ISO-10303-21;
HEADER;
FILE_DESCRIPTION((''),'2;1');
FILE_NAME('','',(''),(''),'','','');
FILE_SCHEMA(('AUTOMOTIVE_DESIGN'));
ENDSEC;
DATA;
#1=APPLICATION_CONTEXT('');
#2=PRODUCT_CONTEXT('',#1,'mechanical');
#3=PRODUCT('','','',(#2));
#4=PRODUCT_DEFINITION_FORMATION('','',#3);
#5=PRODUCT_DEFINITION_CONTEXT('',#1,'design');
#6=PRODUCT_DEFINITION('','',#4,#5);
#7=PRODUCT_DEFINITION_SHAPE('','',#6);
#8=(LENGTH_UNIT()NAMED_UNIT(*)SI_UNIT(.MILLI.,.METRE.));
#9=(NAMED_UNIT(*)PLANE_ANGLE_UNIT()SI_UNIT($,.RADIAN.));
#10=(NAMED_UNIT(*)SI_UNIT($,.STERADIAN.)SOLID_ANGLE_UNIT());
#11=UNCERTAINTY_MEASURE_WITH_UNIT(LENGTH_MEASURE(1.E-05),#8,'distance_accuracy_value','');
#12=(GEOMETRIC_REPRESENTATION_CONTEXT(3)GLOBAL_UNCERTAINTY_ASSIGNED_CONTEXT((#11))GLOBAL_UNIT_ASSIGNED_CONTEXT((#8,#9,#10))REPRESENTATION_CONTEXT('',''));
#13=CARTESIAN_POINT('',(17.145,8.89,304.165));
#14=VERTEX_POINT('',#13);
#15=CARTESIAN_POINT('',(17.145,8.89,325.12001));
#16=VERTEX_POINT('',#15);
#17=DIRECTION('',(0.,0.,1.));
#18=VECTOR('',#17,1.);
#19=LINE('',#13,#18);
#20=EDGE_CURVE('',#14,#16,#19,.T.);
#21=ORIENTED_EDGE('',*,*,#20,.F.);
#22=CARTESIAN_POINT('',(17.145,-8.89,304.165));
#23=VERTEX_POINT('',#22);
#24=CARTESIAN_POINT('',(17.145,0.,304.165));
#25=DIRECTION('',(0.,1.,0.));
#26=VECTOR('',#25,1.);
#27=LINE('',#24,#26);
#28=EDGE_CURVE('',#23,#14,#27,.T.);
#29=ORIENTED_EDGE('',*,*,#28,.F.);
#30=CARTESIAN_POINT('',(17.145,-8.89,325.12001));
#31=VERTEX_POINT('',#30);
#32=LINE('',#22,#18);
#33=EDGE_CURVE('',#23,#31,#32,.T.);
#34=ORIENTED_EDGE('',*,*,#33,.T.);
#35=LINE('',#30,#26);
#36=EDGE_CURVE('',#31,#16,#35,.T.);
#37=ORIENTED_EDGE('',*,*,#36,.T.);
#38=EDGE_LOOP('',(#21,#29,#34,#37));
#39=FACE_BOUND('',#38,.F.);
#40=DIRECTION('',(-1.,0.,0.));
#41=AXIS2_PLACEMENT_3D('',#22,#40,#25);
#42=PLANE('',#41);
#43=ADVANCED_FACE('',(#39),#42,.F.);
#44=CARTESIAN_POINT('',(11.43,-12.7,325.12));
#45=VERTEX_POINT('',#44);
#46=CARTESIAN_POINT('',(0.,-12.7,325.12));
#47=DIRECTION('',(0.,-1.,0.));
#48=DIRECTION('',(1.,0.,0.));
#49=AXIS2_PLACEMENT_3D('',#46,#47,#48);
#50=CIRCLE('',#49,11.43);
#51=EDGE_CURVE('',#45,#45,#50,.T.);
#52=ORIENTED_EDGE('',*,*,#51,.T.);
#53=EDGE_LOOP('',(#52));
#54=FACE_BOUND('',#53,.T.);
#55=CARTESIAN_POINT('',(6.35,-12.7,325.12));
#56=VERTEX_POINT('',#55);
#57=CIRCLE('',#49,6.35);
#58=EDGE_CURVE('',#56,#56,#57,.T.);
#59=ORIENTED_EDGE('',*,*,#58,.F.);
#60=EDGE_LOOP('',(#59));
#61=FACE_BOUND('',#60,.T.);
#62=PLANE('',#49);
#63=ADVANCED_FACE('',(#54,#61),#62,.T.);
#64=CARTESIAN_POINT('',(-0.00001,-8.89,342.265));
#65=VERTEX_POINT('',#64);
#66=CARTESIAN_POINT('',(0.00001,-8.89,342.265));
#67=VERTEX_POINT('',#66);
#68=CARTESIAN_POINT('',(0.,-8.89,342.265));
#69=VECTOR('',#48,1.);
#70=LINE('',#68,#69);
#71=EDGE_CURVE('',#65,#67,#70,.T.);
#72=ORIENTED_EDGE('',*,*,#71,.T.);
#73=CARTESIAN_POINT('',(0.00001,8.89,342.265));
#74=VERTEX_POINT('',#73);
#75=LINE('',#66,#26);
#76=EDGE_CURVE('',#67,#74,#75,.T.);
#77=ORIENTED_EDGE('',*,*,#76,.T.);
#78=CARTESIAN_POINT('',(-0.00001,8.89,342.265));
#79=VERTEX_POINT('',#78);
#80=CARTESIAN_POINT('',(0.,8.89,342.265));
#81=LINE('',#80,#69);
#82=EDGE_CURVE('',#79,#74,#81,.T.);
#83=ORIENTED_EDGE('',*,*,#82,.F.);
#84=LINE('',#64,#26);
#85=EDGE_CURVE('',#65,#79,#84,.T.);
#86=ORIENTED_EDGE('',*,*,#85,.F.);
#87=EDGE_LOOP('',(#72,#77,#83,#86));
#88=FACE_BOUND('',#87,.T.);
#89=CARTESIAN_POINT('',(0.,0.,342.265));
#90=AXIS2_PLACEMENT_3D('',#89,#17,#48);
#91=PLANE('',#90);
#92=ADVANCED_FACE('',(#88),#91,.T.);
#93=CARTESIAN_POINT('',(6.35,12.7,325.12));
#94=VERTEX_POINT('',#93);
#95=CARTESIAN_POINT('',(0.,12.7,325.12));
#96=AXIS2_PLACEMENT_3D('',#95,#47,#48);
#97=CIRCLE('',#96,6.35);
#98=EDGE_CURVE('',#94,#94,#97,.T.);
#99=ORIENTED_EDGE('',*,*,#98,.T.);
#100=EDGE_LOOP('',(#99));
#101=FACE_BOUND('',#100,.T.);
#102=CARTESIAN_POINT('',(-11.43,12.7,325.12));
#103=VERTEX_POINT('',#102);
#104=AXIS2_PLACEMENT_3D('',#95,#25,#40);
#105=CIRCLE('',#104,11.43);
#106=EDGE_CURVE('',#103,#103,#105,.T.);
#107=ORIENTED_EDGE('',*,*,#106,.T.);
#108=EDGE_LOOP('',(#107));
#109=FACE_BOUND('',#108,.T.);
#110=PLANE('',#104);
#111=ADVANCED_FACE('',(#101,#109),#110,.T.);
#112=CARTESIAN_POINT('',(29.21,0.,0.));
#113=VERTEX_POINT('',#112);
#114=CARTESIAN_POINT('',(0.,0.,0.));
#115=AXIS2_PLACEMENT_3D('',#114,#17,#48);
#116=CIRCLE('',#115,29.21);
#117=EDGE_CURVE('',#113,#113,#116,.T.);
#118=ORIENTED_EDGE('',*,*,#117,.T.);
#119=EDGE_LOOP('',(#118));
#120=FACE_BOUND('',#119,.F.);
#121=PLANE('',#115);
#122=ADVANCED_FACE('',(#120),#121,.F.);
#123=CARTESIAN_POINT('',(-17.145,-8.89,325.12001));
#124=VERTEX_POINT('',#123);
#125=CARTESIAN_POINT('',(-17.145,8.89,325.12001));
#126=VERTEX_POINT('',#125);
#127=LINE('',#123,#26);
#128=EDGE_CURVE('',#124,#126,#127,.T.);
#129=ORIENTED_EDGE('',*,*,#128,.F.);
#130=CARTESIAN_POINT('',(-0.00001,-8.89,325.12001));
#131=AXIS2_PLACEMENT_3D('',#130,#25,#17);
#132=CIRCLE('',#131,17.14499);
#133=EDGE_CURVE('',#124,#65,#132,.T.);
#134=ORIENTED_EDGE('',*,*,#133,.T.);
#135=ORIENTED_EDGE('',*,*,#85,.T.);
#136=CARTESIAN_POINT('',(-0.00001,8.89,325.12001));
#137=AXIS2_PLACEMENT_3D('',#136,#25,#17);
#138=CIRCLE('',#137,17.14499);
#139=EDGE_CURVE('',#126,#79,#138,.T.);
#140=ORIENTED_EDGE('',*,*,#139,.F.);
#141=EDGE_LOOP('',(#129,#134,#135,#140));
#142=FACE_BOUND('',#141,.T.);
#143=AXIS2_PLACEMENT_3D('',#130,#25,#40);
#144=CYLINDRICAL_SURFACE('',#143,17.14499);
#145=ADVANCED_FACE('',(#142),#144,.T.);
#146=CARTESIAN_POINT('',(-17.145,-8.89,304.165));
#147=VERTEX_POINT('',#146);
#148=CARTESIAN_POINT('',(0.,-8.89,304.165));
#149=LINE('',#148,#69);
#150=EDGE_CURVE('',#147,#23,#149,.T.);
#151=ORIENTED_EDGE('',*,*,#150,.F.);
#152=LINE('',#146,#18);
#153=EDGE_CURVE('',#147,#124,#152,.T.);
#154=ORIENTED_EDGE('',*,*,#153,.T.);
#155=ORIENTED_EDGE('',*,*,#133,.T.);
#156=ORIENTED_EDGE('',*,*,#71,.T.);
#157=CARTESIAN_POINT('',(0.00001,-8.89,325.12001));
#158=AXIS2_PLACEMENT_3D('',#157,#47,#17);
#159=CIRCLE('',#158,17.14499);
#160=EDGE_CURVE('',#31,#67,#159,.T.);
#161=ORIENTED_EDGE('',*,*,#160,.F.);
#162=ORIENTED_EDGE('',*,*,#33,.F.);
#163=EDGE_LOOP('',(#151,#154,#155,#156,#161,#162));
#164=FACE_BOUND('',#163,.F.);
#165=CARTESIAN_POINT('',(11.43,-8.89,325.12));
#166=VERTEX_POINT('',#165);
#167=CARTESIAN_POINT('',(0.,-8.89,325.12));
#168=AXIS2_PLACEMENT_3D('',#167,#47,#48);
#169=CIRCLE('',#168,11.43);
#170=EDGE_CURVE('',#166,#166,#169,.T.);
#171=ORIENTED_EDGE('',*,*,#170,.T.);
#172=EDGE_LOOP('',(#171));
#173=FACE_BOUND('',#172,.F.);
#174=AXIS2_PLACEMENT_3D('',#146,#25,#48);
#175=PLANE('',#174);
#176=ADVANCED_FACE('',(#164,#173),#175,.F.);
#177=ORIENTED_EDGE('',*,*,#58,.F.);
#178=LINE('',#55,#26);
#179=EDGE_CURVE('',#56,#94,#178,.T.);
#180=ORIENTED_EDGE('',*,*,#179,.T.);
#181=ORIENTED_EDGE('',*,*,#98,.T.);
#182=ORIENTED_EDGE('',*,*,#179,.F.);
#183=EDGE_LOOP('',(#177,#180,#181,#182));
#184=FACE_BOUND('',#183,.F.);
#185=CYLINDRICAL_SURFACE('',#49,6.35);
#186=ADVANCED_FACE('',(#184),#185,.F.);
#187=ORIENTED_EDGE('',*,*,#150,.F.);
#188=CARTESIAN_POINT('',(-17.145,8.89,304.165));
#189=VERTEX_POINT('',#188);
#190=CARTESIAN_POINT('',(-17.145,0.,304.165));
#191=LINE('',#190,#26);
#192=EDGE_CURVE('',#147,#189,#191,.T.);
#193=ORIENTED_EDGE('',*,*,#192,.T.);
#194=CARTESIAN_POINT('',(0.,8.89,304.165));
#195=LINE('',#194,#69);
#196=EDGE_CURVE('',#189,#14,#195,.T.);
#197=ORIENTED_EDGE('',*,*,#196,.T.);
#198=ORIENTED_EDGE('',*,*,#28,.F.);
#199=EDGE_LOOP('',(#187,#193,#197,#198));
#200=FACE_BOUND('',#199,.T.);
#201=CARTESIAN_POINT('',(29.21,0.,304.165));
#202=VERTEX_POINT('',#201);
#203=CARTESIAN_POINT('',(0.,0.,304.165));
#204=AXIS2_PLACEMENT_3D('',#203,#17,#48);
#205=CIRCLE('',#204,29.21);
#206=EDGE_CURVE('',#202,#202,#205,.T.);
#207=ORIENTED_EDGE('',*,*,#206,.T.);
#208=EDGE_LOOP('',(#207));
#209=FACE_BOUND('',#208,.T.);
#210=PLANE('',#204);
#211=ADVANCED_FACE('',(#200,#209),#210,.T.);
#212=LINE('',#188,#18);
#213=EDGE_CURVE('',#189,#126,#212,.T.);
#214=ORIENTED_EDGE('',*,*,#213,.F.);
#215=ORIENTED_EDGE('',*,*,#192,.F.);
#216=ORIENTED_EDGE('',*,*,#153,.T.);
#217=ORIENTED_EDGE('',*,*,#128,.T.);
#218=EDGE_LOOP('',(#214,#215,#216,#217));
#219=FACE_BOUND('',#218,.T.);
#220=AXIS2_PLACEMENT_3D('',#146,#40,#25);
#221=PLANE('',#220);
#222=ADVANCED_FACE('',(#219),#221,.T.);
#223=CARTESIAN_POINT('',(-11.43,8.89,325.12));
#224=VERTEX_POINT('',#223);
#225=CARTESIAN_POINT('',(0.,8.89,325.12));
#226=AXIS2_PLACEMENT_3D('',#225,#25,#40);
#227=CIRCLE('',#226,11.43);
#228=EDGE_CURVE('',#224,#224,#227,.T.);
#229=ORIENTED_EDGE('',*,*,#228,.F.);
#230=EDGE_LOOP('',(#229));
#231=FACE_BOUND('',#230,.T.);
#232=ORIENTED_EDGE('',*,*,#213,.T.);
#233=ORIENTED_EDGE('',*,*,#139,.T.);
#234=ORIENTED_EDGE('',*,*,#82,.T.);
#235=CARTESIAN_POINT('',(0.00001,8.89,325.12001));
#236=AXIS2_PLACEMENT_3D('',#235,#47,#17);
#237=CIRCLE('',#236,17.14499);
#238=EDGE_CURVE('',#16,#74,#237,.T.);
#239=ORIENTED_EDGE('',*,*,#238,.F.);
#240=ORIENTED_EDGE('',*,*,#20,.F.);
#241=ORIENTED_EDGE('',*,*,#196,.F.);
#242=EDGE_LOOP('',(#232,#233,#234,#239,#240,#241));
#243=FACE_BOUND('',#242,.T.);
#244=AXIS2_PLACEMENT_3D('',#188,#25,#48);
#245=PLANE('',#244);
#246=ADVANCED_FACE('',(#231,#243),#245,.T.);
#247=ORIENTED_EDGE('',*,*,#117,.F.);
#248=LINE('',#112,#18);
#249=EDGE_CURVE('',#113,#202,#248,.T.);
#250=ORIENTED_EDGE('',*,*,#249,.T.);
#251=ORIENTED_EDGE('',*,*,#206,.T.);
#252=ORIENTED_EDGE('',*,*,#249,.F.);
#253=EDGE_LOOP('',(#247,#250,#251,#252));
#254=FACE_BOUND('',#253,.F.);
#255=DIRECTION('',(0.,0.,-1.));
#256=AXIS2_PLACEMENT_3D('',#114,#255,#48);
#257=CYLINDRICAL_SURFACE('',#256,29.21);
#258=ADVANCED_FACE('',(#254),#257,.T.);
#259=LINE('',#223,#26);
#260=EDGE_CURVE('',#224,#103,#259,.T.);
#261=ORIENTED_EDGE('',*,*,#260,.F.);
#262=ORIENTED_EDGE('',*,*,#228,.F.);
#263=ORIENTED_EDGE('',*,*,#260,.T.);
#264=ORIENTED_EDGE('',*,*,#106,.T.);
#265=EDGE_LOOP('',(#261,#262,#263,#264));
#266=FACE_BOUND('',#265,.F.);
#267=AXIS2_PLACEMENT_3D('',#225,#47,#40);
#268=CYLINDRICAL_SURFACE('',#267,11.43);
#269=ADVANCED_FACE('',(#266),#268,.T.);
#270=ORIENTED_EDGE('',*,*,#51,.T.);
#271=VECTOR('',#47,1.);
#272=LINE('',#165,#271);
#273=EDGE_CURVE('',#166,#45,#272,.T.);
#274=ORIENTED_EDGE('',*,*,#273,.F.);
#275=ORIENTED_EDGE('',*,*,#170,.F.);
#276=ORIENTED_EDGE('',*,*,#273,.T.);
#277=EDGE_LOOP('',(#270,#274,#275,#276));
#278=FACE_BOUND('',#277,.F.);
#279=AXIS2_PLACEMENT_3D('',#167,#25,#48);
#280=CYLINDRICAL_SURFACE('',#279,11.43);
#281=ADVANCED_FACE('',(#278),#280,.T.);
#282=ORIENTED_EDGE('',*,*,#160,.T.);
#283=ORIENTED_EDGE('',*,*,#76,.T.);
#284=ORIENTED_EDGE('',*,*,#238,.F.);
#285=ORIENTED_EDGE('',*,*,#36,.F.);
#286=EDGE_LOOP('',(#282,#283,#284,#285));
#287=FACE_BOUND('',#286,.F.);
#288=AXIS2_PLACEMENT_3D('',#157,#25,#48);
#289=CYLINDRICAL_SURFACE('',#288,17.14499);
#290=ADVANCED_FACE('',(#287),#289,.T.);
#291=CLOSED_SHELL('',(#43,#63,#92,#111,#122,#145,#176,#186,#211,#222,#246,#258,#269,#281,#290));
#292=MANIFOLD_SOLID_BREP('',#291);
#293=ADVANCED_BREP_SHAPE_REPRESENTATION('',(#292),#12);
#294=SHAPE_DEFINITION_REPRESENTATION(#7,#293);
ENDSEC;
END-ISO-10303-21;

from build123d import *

# Parameters (mm, degrees)
F0_R      = 29.21
F1_DEPTH  = 304.165
F2_W      = 34.29
F2_H      = 17.78
F3_DEPTH  = 38.1
F4_R      = 17.14499
F5_R      = 11.43
F6_DEPTH  = 3.81
F7_R      = 11.43
F8_DEPTH  = 3.81
F9_R      = 6.35
F10_DEPTH = 38.1


# Not quite as in the source:
# - a fillet or chamfer is up to 0.001 mm smaller than in the source, because OpenCascade refuses the exact size


with BuildPart() as f1:
    # F0 (on Top) → F1 (new body)
    with BuildSketch(Plane.XY):
        Circle(F0_R)
    extrude(amount=F1_DEPTH)

    # F2 (on face) → F3 (join)
    with BuildSketch(Plane.XY.offset(304.165)):
        Rectangle(F2_W, F2_H)
    extrude(amount=F3_DEPTH)

    # F4 (radius 17.145 in the source; OpenCascade refuses exactly that, so slightly less here)
    f4_edges = [f1.edges().sort_by_distance(p)[0] for p in [
        (17.145, 0, 342.265),
        (-17.145, 0, 342.265),
    ]]
    fillet(f4_edges, radius=F4_R)

    # F5 (on face) → F6 (join)
    with BuildSketch(Plane(origin=(0, 8.89, 0), x_dir=(-1, 0, 0), z_dir=(0, 1, 0))):
        with Locations((0, 325.12)):
            Circle(F5_R)
    extrude(amount=F6_DEPTH)

    # F7 (on face) → F8 (join)
    with BuildSketch(Plane.XZ.offset(8.89)):
        with Locations((0, 325.12)):
            Circle(F7_R)
    extrude(amount=F8_DEPTH)

    # F9 (on face) → F10 (cut)
    with BuildSketch(Plane.XZ.offset(12.7)):
        with Locations((0, 325.12)):
            Circle(F9_R)
    extrude(amount=-F10_DEPTH, mode=Mode.SUBTRACT)


solid = f1.part
